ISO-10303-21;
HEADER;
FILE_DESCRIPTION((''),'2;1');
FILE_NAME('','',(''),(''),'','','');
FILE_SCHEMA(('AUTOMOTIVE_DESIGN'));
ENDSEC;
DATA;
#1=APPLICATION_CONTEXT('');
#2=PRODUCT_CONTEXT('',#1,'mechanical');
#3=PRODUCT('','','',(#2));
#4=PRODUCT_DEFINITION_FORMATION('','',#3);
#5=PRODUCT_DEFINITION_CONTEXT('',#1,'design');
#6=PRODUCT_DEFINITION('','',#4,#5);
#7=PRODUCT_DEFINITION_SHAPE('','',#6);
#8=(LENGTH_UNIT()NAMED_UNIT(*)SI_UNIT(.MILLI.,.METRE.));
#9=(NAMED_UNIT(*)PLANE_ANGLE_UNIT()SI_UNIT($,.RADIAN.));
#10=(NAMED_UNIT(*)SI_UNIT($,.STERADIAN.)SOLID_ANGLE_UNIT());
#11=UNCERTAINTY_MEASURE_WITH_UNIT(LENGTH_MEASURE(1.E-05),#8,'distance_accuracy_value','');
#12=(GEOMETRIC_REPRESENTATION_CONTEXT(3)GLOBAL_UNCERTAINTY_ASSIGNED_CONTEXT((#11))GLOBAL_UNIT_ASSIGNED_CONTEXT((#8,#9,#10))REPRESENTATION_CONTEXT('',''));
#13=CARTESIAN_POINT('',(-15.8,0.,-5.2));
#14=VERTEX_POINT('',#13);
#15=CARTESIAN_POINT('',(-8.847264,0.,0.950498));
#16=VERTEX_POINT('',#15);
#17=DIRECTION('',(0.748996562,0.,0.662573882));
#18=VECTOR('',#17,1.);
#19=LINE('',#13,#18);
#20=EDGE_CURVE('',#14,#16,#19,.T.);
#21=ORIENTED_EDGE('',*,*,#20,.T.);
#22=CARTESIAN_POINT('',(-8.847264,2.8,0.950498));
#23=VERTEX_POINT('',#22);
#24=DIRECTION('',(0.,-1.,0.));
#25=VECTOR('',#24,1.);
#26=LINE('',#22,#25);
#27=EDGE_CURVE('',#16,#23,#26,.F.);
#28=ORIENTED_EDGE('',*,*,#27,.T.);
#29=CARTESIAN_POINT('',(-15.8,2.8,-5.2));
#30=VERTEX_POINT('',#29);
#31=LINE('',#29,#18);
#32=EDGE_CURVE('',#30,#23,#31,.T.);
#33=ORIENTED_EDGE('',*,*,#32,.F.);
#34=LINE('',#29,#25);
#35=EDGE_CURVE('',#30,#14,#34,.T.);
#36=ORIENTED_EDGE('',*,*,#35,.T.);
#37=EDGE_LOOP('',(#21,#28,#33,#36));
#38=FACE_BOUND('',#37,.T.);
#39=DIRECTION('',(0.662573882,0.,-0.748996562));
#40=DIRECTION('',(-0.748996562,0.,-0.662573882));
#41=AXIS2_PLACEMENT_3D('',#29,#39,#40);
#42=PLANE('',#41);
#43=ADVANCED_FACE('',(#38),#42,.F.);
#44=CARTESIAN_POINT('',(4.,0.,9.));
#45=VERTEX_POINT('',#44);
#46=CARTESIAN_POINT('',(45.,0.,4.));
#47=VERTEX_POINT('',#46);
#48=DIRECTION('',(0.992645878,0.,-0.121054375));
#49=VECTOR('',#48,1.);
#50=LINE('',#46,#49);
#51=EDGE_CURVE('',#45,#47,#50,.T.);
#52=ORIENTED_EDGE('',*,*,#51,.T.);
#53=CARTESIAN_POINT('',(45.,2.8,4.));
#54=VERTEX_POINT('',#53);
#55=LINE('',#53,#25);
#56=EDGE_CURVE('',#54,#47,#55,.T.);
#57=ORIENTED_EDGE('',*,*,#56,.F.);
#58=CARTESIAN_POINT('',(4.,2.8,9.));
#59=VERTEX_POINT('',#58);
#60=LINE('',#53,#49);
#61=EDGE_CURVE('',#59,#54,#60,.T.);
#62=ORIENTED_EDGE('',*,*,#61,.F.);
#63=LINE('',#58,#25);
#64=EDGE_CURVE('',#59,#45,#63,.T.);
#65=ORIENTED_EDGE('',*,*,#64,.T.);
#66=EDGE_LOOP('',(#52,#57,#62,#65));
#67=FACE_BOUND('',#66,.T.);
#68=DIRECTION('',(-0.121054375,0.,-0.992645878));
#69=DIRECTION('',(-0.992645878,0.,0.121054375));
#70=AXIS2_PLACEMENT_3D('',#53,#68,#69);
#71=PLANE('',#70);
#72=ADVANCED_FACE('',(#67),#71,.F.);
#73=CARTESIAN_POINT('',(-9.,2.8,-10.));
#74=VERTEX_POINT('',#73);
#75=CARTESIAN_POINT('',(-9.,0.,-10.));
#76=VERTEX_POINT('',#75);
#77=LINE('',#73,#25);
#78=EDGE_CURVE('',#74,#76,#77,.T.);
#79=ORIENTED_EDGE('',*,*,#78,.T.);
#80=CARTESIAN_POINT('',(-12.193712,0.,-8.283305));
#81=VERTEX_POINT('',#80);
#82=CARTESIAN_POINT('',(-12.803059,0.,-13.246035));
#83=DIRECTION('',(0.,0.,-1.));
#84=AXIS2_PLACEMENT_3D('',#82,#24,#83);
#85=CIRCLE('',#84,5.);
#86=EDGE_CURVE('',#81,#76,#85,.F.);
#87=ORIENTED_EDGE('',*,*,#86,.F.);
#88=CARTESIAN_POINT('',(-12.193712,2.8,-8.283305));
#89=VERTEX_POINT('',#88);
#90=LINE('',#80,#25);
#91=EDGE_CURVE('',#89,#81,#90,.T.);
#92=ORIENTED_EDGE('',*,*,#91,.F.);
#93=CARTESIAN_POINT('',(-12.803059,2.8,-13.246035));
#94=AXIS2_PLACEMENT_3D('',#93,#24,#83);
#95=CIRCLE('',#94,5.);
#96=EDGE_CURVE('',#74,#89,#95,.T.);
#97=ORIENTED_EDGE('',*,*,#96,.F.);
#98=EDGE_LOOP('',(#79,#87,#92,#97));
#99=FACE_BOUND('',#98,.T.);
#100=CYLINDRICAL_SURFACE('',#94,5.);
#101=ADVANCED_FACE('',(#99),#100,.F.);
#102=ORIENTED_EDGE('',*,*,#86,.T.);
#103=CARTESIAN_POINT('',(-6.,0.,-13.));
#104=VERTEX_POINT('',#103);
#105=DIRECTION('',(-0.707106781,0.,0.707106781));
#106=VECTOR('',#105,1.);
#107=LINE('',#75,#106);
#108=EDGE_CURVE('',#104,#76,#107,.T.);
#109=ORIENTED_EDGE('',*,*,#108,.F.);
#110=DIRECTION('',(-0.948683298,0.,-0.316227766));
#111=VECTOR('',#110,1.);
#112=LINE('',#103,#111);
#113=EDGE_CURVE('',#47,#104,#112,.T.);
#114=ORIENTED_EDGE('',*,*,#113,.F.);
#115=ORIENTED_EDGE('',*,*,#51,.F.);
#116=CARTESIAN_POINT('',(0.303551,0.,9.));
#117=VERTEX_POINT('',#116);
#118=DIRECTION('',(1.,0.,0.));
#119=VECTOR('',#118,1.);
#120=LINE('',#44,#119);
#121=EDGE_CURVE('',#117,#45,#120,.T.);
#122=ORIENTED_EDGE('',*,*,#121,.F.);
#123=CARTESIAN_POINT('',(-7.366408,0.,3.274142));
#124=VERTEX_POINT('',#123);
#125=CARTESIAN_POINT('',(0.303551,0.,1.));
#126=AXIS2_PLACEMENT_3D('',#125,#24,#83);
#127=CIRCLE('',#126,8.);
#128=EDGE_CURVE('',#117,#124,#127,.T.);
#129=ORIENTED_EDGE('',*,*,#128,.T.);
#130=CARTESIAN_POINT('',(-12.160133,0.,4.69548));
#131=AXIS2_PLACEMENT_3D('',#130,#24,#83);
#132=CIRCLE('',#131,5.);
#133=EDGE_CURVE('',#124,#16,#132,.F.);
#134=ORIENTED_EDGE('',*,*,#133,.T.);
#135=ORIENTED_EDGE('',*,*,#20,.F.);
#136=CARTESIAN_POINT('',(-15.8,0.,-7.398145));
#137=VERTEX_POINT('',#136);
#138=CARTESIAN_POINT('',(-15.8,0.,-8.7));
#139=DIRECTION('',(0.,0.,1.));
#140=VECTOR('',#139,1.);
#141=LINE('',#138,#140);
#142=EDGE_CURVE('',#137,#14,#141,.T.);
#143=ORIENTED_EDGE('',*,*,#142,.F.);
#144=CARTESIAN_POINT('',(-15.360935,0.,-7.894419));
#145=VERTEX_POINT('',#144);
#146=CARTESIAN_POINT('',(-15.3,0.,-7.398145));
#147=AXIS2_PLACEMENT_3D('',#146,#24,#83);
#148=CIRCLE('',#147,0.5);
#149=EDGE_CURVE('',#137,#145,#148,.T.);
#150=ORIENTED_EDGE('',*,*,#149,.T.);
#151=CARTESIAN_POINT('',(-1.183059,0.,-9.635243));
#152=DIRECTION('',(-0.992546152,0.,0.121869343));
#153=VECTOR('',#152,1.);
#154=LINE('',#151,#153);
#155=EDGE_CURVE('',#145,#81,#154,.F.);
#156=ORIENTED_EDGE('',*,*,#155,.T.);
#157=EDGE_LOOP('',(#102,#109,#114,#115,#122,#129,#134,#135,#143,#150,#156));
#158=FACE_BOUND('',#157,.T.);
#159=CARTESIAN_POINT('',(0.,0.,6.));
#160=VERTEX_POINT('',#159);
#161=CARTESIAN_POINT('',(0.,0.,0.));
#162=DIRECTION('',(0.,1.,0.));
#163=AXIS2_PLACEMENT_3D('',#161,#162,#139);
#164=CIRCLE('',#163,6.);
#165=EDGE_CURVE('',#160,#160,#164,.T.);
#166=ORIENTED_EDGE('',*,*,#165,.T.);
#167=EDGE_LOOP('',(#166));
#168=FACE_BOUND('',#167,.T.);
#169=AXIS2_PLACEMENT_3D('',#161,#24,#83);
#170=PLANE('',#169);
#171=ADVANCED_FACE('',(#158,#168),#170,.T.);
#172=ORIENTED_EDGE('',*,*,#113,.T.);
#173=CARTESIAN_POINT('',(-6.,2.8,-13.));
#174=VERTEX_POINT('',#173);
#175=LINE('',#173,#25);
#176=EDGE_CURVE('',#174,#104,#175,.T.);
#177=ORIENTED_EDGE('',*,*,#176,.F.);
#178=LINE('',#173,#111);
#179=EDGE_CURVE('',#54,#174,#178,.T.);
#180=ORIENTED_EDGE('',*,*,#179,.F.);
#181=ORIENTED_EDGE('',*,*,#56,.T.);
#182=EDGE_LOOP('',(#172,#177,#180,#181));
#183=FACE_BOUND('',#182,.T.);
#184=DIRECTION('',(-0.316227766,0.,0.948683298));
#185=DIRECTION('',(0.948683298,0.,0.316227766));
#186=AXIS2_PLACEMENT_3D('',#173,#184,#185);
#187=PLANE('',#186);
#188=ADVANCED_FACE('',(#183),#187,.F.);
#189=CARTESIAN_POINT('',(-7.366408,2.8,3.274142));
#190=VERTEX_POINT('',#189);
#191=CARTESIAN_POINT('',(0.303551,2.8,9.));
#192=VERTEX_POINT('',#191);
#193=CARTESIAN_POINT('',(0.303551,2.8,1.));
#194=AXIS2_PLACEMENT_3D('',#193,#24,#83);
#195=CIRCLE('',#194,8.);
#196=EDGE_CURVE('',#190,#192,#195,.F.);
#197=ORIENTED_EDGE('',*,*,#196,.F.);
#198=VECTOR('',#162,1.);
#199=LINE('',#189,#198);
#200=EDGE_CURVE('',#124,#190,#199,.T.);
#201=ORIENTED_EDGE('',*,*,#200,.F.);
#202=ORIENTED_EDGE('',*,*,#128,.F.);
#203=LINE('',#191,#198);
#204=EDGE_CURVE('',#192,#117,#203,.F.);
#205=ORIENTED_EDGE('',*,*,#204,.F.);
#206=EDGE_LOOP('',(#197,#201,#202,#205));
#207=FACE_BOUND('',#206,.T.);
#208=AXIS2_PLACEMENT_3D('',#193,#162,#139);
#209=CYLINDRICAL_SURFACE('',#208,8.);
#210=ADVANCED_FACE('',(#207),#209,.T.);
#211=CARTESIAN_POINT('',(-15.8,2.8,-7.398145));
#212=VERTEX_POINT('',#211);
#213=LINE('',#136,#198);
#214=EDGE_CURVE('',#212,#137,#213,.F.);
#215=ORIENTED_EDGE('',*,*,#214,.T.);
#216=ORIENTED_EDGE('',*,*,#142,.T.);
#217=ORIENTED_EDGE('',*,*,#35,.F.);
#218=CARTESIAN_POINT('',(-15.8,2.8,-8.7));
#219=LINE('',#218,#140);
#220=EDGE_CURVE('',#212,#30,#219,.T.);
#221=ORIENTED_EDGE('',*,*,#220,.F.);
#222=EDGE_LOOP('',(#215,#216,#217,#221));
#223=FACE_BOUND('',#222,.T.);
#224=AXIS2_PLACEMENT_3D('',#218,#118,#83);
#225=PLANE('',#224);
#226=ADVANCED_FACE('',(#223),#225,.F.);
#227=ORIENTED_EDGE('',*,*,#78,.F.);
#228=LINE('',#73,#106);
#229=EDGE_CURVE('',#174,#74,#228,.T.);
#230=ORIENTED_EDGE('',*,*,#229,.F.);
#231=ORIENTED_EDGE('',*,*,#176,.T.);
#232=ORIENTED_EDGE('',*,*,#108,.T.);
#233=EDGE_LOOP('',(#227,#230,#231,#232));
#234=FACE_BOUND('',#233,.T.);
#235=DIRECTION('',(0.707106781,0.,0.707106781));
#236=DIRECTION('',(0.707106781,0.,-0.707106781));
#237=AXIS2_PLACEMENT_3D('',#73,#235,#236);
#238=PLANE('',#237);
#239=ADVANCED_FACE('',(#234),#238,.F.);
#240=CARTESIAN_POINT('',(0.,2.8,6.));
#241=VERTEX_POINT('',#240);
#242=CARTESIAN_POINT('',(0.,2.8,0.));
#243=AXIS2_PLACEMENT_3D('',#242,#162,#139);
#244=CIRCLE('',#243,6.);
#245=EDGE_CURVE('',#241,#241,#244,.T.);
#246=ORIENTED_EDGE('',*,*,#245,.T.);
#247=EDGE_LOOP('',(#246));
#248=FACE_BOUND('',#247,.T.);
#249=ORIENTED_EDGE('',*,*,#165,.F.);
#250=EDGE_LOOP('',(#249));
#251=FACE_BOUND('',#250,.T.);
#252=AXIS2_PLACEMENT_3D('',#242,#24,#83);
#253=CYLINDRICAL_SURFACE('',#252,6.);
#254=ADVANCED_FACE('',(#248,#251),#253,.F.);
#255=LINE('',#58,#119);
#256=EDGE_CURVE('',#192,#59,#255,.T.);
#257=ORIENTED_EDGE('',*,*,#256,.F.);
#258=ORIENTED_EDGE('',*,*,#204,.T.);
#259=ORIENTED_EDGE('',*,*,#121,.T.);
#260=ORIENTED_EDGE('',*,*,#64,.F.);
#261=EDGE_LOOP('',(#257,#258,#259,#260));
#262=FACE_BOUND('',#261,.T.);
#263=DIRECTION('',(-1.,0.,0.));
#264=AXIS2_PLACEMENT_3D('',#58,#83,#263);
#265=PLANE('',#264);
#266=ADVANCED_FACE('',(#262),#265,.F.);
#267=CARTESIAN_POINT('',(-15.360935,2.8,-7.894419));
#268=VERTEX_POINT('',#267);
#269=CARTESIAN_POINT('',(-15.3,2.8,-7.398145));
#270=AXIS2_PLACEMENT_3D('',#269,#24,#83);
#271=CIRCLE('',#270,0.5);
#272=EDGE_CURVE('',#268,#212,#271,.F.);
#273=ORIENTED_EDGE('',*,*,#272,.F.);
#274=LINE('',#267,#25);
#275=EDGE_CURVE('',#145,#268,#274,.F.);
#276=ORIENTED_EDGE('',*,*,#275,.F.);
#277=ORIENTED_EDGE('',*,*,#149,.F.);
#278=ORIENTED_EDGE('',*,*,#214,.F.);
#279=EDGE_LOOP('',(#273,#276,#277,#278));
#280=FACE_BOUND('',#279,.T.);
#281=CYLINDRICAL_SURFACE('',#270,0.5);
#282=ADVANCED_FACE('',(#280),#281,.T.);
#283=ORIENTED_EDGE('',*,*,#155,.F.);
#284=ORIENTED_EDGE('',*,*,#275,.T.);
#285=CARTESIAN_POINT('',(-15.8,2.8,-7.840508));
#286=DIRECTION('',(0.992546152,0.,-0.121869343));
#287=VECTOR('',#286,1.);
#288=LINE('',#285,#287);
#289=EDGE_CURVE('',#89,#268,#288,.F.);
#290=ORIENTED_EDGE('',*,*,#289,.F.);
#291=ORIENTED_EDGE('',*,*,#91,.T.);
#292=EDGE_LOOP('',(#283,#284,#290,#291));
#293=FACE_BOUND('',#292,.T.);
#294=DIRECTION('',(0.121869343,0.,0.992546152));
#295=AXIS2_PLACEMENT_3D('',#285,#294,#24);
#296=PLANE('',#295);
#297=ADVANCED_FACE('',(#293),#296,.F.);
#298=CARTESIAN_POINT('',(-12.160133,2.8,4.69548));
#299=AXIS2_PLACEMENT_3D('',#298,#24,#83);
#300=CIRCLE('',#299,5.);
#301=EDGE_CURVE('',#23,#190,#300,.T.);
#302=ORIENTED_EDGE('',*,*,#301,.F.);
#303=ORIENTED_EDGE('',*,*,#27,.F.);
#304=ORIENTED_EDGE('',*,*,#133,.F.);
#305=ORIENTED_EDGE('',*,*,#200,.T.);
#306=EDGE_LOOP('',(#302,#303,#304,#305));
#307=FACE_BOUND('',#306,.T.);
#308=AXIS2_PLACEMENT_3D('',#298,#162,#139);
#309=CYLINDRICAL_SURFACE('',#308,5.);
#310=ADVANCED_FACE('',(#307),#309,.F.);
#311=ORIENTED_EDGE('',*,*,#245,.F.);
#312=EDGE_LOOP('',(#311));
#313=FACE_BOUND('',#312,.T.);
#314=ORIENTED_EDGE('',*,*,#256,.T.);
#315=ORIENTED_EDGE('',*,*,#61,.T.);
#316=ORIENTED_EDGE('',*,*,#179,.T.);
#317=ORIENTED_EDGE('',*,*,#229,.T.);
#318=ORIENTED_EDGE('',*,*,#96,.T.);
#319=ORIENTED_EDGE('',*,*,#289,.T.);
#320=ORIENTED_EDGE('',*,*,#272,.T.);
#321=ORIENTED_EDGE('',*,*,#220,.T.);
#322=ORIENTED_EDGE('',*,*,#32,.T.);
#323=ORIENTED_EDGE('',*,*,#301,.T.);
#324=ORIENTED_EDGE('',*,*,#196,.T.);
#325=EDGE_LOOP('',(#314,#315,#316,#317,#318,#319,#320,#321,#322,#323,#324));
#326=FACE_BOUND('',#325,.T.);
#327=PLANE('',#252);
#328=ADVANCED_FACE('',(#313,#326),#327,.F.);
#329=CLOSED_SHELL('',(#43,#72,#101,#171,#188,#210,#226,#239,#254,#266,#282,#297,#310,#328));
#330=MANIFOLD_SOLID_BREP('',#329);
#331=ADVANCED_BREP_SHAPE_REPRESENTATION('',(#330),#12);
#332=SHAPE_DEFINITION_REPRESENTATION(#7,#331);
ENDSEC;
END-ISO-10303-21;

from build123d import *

# Parameters (mm, degrees)
SKETCH1_R           = 6
BOSS_EXTRUDE1_DEPTH = 2.8
CHAMFER1_SIZE       = 0.859491926
CHAMFER1_SIZE_2     = 7
FILLET4_R           = 5
FILLET5_R           = 0.5
FILLET10_R          = 5
FILLET11_R          = 8


with BuildPart() as part:
    # Sketch1 → Boss-Extrude1 (new body)
    with BuildSketch(Plane(origin=(0, 0, 0), x_dir=(1, 0, 0), z_dir=(0, 1, 0))):
        Polygon((-9, 10), (-6, 13), (45, -4), (4, -9), (-6, -9), (-7.660869565, -2), (-15.8, 5.2), (-15.8, 8.7), (-9, 8.7), align=None)
        with Locations(Location((0, 0, 0), (0, 0, 270))):
            Circle(SKETCH1_R, mode=Mode.SUBTRACT)
    extrude(amount=BOSS_EXTRUDE1_DEPTH)

    # Chamfer1
    # the kernel refuses this chamfer: 7, 0.859491926 mm, written as the material it takes off along each edge
    with BuildSketch(Plane(origin=(-15.8, -18.194982295, -8.7), x_dir=(-0.29696840376135825, 0, 0.9548873060039236), z_dir=(0, 1, 0))) as chamfer1_piece_1_section:
        Polygon((CHAMFER1_SIZE * 0.95488730636, CHAMFER1_SIZE * 0.296968403872), (-CHAMFER1_SIZE_2 * 0.296968403761, CHAMFER1_SIZE_2 * 0.954887306004), (0, 0), align=None)
    chamfer1_piece_1 = extrude(amount=39.18996459, mode=Mode.PRIVATE)
    chamfer1_piece_1 = split(chamfer1_piece_1, bisect_by=Plane(origin=(-9, 1.4, -8.488844691), z_dir=(-1, 0, 0)), keep=Keep.TOP, mode=Mode.PRIVATE)
    add(chamfer1_piece_1, mode=Mode.SUBTRACT)

    # Fillet4
    # the kernel refuses this fillet: 5 mm, written as the material it adds along each edge
    with BuildSketch(Plane(origin=(-9, 0, -8.675443088), x_dir=(-0.9925461516413187, 0, 0.12186934340517559), z_dir=(0, 1, 0))) as fillet4_piece_1:
        with BuildLine():
            CenterArc((3.217696086, -5), FILLET4_R, 90, 42.518155203)
            Line((-0.161422881, -1.314683866), (-0.229005261, -1.240977543))
            ThreePointArc((-0.229005261, -1.240977543), (-0.179966056, -0.645154999), (-0.099254615, 0.012186934))
            Line((-0.099254615, 0.012186934), (0, 0.1))
            Line((0, 0.1), (3.217696086, 0.1))
            Line((3.217696086, 0.1), (3.217696086, 0))
        make_face()
    extrude(amount=2.8)

    # Fillet5
    fillet5_edges = [part.edges().sort_by_distance(p)[0] for p in [
        (-15.8, 1.4, -7.840508074),
    ]]
    fillet(fillet5_edges, radius=FILLET5_R)

    # Fillet10
    fillet10_edges = [part.edges().sort_by_distance(p)[0] for p in [
        (-7.660869565, 1.4, 2),
    ]]
    fillet(fillet10_edges, radius=FILLET10_R)

    # Fillet11
    fillet11_edges = [part.edges().sort_by_distance(p)[0] for p in [
        (-6, 1.4, 9),
    ]]
    fillet(fillet11_edges, radius=FILLET11_R)


solid = part.part
